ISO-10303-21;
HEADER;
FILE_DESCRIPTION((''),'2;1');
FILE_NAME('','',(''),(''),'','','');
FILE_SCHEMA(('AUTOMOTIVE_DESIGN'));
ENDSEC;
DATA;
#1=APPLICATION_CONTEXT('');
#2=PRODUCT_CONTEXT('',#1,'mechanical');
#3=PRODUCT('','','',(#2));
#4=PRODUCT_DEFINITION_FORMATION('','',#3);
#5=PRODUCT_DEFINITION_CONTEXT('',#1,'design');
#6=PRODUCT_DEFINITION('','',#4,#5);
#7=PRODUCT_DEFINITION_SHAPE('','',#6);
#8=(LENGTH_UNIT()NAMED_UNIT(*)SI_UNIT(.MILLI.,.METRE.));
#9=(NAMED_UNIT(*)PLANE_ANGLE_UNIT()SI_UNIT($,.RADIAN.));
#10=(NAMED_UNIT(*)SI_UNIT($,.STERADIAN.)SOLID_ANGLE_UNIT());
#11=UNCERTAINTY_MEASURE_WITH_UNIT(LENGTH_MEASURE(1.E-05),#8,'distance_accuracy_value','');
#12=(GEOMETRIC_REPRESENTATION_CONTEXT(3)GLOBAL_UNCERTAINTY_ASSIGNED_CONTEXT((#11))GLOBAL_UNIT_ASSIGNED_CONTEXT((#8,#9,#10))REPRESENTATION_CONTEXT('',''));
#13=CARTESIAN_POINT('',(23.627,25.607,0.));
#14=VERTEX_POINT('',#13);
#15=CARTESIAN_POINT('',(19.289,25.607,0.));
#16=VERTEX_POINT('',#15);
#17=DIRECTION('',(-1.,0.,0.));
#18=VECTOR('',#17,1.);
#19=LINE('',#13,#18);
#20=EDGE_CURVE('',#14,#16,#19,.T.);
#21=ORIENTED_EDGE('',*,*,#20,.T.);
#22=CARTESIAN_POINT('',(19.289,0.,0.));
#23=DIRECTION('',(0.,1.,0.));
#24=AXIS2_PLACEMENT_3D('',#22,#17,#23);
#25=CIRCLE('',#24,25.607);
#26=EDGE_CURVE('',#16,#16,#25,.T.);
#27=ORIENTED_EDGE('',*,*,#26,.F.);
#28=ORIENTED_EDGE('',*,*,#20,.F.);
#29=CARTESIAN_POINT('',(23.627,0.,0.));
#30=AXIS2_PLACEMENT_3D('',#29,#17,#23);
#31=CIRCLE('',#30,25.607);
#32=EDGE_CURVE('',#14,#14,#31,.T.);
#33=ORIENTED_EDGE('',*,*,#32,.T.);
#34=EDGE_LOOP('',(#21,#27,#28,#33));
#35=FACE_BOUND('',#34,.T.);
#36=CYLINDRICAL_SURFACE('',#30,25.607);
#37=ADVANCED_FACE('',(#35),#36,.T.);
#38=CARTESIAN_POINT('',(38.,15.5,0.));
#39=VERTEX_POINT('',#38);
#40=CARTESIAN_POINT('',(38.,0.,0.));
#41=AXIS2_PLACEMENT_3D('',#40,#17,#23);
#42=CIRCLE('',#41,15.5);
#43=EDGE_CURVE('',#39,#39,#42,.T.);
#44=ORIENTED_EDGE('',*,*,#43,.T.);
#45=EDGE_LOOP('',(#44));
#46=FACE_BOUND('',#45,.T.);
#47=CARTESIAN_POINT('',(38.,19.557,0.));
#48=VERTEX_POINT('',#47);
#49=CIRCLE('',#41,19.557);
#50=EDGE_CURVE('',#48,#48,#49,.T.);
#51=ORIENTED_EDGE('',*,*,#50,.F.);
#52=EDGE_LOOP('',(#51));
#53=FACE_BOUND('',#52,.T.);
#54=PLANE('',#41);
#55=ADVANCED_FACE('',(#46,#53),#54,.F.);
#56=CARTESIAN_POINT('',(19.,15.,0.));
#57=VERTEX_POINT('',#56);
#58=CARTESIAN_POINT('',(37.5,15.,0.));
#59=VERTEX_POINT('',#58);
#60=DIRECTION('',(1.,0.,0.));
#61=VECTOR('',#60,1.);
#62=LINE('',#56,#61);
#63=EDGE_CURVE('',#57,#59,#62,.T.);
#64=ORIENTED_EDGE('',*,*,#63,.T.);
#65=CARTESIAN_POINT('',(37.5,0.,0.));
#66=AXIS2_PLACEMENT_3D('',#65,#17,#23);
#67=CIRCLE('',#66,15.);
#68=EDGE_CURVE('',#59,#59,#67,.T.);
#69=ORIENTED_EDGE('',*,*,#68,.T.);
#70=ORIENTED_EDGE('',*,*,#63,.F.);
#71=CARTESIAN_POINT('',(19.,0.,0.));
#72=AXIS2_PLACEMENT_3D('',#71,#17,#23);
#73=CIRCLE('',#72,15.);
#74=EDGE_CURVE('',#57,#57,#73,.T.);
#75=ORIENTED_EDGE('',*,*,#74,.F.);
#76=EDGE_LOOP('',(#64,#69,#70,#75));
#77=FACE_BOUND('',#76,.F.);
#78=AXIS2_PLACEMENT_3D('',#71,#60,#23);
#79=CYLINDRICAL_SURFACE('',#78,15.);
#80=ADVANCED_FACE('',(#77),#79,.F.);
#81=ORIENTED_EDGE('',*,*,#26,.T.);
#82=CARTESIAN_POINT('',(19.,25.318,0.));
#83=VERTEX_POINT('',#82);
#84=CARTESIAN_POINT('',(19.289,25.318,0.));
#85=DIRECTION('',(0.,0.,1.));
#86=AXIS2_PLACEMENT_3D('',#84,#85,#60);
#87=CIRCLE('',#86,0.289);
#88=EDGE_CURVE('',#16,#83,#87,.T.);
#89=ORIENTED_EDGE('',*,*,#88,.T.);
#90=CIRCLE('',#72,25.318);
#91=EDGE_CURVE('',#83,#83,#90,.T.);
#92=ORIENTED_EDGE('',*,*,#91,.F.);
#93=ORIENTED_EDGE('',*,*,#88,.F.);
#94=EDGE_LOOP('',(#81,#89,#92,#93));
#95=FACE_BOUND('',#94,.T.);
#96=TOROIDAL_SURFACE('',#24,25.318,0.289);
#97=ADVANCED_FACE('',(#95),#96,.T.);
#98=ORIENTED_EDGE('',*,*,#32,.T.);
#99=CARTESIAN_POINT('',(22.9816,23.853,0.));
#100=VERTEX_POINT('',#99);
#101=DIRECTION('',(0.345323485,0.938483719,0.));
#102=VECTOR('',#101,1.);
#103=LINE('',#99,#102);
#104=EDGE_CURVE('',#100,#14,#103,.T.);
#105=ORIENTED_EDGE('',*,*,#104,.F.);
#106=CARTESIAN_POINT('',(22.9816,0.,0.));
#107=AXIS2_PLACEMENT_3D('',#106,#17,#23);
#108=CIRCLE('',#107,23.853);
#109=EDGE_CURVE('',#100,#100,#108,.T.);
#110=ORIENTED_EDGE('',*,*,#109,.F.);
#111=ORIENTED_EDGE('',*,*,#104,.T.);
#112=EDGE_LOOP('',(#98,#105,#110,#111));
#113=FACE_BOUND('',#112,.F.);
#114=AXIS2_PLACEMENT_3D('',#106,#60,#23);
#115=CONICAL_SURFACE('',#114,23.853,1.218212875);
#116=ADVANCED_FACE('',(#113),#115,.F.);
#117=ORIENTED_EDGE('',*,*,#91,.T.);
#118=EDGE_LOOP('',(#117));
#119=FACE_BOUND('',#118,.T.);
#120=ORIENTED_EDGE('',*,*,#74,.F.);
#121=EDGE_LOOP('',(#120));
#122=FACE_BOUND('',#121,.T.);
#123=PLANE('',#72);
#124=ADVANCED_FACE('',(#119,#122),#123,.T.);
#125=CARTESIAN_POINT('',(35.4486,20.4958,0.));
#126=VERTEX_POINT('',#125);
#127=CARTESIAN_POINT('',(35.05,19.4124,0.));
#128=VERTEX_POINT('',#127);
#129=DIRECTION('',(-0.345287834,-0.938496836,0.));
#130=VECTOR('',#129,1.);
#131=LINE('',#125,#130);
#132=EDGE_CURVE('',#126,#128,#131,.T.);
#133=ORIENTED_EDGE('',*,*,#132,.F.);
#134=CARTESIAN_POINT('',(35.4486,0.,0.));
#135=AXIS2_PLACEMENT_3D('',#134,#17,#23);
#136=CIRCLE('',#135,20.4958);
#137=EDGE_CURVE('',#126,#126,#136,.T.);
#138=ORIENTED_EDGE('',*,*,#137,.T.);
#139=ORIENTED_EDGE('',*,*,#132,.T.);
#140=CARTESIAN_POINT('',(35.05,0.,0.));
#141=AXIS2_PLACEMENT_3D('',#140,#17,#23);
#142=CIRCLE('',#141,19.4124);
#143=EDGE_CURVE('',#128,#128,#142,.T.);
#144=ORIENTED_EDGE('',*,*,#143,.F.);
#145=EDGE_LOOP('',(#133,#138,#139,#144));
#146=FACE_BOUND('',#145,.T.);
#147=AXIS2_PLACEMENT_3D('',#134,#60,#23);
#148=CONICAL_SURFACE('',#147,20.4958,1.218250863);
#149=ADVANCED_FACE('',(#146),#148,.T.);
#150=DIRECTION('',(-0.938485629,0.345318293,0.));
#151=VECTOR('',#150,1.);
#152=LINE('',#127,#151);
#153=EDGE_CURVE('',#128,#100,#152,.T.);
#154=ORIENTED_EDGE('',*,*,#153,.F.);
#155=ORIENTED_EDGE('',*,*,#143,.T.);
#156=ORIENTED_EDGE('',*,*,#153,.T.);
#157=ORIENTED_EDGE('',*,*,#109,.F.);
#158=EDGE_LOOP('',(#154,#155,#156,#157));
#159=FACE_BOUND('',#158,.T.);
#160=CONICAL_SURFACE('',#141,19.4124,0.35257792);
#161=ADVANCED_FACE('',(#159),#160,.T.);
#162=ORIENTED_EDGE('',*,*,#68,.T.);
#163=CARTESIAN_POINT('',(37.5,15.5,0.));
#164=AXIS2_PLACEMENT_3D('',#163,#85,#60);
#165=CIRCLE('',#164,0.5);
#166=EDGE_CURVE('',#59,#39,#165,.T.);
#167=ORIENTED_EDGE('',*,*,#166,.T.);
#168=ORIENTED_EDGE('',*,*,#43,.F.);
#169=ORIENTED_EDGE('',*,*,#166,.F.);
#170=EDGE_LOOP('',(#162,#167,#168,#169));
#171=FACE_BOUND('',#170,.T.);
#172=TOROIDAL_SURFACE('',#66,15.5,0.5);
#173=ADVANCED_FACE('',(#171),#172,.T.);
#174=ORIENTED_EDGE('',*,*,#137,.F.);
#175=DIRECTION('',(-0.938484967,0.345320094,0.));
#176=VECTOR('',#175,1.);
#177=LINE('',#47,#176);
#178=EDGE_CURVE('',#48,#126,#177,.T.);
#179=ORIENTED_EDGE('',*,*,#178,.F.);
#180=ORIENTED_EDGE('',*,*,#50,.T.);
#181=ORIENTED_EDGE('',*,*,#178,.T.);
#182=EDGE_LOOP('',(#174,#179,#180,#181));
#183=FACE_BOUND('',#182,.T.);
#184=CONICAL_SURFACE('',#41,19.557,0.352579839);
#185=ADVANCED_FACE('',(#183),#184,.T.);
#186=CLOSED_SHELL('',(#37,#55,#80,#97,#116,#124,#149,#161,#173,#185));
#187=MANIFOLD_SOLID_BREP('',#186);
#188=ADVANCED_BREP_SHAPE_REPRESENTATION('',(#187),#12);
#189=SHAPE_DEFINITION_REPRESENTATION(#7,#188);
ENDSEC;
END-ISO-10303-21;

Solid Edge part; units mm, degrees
sketch "Sketch1" plane through (0, 0, 0) normal (0, 0, 1) x (1, 0, 0)
  line L0 (19, 25.318) -> (19, 15)
  line L1 (19, 15) -> (37.5, 15)
  arc A0 (37.5, 15) -> (38, 15.5) centre (37.5, 15.5) ccw
  line L2 (38, 15.5) -> (38, 19.557)
  line L3 (38, 19.557) -> (35.4486, 20.4958)
  line L4 (35.4486, 20.4958) -> (35.05, 19.4124)
  line L5 (35.05, 19.4124) -> (22.9816, 23.853)
  line L6 (22.9816, 23.853) -> (23.627, 25.607)
  line L7 (23.627, 25.607) -> (19.289, 25.607)
  arc A1 (19.289, 25.607) -> (19, 25.318) centre (19.289, 25.318) ccw
revolve "RevolvedProtrusion1" add sketch "Sketch1" angle 360 about axis through (50, 0, 0) along (-1, 0, 0)
